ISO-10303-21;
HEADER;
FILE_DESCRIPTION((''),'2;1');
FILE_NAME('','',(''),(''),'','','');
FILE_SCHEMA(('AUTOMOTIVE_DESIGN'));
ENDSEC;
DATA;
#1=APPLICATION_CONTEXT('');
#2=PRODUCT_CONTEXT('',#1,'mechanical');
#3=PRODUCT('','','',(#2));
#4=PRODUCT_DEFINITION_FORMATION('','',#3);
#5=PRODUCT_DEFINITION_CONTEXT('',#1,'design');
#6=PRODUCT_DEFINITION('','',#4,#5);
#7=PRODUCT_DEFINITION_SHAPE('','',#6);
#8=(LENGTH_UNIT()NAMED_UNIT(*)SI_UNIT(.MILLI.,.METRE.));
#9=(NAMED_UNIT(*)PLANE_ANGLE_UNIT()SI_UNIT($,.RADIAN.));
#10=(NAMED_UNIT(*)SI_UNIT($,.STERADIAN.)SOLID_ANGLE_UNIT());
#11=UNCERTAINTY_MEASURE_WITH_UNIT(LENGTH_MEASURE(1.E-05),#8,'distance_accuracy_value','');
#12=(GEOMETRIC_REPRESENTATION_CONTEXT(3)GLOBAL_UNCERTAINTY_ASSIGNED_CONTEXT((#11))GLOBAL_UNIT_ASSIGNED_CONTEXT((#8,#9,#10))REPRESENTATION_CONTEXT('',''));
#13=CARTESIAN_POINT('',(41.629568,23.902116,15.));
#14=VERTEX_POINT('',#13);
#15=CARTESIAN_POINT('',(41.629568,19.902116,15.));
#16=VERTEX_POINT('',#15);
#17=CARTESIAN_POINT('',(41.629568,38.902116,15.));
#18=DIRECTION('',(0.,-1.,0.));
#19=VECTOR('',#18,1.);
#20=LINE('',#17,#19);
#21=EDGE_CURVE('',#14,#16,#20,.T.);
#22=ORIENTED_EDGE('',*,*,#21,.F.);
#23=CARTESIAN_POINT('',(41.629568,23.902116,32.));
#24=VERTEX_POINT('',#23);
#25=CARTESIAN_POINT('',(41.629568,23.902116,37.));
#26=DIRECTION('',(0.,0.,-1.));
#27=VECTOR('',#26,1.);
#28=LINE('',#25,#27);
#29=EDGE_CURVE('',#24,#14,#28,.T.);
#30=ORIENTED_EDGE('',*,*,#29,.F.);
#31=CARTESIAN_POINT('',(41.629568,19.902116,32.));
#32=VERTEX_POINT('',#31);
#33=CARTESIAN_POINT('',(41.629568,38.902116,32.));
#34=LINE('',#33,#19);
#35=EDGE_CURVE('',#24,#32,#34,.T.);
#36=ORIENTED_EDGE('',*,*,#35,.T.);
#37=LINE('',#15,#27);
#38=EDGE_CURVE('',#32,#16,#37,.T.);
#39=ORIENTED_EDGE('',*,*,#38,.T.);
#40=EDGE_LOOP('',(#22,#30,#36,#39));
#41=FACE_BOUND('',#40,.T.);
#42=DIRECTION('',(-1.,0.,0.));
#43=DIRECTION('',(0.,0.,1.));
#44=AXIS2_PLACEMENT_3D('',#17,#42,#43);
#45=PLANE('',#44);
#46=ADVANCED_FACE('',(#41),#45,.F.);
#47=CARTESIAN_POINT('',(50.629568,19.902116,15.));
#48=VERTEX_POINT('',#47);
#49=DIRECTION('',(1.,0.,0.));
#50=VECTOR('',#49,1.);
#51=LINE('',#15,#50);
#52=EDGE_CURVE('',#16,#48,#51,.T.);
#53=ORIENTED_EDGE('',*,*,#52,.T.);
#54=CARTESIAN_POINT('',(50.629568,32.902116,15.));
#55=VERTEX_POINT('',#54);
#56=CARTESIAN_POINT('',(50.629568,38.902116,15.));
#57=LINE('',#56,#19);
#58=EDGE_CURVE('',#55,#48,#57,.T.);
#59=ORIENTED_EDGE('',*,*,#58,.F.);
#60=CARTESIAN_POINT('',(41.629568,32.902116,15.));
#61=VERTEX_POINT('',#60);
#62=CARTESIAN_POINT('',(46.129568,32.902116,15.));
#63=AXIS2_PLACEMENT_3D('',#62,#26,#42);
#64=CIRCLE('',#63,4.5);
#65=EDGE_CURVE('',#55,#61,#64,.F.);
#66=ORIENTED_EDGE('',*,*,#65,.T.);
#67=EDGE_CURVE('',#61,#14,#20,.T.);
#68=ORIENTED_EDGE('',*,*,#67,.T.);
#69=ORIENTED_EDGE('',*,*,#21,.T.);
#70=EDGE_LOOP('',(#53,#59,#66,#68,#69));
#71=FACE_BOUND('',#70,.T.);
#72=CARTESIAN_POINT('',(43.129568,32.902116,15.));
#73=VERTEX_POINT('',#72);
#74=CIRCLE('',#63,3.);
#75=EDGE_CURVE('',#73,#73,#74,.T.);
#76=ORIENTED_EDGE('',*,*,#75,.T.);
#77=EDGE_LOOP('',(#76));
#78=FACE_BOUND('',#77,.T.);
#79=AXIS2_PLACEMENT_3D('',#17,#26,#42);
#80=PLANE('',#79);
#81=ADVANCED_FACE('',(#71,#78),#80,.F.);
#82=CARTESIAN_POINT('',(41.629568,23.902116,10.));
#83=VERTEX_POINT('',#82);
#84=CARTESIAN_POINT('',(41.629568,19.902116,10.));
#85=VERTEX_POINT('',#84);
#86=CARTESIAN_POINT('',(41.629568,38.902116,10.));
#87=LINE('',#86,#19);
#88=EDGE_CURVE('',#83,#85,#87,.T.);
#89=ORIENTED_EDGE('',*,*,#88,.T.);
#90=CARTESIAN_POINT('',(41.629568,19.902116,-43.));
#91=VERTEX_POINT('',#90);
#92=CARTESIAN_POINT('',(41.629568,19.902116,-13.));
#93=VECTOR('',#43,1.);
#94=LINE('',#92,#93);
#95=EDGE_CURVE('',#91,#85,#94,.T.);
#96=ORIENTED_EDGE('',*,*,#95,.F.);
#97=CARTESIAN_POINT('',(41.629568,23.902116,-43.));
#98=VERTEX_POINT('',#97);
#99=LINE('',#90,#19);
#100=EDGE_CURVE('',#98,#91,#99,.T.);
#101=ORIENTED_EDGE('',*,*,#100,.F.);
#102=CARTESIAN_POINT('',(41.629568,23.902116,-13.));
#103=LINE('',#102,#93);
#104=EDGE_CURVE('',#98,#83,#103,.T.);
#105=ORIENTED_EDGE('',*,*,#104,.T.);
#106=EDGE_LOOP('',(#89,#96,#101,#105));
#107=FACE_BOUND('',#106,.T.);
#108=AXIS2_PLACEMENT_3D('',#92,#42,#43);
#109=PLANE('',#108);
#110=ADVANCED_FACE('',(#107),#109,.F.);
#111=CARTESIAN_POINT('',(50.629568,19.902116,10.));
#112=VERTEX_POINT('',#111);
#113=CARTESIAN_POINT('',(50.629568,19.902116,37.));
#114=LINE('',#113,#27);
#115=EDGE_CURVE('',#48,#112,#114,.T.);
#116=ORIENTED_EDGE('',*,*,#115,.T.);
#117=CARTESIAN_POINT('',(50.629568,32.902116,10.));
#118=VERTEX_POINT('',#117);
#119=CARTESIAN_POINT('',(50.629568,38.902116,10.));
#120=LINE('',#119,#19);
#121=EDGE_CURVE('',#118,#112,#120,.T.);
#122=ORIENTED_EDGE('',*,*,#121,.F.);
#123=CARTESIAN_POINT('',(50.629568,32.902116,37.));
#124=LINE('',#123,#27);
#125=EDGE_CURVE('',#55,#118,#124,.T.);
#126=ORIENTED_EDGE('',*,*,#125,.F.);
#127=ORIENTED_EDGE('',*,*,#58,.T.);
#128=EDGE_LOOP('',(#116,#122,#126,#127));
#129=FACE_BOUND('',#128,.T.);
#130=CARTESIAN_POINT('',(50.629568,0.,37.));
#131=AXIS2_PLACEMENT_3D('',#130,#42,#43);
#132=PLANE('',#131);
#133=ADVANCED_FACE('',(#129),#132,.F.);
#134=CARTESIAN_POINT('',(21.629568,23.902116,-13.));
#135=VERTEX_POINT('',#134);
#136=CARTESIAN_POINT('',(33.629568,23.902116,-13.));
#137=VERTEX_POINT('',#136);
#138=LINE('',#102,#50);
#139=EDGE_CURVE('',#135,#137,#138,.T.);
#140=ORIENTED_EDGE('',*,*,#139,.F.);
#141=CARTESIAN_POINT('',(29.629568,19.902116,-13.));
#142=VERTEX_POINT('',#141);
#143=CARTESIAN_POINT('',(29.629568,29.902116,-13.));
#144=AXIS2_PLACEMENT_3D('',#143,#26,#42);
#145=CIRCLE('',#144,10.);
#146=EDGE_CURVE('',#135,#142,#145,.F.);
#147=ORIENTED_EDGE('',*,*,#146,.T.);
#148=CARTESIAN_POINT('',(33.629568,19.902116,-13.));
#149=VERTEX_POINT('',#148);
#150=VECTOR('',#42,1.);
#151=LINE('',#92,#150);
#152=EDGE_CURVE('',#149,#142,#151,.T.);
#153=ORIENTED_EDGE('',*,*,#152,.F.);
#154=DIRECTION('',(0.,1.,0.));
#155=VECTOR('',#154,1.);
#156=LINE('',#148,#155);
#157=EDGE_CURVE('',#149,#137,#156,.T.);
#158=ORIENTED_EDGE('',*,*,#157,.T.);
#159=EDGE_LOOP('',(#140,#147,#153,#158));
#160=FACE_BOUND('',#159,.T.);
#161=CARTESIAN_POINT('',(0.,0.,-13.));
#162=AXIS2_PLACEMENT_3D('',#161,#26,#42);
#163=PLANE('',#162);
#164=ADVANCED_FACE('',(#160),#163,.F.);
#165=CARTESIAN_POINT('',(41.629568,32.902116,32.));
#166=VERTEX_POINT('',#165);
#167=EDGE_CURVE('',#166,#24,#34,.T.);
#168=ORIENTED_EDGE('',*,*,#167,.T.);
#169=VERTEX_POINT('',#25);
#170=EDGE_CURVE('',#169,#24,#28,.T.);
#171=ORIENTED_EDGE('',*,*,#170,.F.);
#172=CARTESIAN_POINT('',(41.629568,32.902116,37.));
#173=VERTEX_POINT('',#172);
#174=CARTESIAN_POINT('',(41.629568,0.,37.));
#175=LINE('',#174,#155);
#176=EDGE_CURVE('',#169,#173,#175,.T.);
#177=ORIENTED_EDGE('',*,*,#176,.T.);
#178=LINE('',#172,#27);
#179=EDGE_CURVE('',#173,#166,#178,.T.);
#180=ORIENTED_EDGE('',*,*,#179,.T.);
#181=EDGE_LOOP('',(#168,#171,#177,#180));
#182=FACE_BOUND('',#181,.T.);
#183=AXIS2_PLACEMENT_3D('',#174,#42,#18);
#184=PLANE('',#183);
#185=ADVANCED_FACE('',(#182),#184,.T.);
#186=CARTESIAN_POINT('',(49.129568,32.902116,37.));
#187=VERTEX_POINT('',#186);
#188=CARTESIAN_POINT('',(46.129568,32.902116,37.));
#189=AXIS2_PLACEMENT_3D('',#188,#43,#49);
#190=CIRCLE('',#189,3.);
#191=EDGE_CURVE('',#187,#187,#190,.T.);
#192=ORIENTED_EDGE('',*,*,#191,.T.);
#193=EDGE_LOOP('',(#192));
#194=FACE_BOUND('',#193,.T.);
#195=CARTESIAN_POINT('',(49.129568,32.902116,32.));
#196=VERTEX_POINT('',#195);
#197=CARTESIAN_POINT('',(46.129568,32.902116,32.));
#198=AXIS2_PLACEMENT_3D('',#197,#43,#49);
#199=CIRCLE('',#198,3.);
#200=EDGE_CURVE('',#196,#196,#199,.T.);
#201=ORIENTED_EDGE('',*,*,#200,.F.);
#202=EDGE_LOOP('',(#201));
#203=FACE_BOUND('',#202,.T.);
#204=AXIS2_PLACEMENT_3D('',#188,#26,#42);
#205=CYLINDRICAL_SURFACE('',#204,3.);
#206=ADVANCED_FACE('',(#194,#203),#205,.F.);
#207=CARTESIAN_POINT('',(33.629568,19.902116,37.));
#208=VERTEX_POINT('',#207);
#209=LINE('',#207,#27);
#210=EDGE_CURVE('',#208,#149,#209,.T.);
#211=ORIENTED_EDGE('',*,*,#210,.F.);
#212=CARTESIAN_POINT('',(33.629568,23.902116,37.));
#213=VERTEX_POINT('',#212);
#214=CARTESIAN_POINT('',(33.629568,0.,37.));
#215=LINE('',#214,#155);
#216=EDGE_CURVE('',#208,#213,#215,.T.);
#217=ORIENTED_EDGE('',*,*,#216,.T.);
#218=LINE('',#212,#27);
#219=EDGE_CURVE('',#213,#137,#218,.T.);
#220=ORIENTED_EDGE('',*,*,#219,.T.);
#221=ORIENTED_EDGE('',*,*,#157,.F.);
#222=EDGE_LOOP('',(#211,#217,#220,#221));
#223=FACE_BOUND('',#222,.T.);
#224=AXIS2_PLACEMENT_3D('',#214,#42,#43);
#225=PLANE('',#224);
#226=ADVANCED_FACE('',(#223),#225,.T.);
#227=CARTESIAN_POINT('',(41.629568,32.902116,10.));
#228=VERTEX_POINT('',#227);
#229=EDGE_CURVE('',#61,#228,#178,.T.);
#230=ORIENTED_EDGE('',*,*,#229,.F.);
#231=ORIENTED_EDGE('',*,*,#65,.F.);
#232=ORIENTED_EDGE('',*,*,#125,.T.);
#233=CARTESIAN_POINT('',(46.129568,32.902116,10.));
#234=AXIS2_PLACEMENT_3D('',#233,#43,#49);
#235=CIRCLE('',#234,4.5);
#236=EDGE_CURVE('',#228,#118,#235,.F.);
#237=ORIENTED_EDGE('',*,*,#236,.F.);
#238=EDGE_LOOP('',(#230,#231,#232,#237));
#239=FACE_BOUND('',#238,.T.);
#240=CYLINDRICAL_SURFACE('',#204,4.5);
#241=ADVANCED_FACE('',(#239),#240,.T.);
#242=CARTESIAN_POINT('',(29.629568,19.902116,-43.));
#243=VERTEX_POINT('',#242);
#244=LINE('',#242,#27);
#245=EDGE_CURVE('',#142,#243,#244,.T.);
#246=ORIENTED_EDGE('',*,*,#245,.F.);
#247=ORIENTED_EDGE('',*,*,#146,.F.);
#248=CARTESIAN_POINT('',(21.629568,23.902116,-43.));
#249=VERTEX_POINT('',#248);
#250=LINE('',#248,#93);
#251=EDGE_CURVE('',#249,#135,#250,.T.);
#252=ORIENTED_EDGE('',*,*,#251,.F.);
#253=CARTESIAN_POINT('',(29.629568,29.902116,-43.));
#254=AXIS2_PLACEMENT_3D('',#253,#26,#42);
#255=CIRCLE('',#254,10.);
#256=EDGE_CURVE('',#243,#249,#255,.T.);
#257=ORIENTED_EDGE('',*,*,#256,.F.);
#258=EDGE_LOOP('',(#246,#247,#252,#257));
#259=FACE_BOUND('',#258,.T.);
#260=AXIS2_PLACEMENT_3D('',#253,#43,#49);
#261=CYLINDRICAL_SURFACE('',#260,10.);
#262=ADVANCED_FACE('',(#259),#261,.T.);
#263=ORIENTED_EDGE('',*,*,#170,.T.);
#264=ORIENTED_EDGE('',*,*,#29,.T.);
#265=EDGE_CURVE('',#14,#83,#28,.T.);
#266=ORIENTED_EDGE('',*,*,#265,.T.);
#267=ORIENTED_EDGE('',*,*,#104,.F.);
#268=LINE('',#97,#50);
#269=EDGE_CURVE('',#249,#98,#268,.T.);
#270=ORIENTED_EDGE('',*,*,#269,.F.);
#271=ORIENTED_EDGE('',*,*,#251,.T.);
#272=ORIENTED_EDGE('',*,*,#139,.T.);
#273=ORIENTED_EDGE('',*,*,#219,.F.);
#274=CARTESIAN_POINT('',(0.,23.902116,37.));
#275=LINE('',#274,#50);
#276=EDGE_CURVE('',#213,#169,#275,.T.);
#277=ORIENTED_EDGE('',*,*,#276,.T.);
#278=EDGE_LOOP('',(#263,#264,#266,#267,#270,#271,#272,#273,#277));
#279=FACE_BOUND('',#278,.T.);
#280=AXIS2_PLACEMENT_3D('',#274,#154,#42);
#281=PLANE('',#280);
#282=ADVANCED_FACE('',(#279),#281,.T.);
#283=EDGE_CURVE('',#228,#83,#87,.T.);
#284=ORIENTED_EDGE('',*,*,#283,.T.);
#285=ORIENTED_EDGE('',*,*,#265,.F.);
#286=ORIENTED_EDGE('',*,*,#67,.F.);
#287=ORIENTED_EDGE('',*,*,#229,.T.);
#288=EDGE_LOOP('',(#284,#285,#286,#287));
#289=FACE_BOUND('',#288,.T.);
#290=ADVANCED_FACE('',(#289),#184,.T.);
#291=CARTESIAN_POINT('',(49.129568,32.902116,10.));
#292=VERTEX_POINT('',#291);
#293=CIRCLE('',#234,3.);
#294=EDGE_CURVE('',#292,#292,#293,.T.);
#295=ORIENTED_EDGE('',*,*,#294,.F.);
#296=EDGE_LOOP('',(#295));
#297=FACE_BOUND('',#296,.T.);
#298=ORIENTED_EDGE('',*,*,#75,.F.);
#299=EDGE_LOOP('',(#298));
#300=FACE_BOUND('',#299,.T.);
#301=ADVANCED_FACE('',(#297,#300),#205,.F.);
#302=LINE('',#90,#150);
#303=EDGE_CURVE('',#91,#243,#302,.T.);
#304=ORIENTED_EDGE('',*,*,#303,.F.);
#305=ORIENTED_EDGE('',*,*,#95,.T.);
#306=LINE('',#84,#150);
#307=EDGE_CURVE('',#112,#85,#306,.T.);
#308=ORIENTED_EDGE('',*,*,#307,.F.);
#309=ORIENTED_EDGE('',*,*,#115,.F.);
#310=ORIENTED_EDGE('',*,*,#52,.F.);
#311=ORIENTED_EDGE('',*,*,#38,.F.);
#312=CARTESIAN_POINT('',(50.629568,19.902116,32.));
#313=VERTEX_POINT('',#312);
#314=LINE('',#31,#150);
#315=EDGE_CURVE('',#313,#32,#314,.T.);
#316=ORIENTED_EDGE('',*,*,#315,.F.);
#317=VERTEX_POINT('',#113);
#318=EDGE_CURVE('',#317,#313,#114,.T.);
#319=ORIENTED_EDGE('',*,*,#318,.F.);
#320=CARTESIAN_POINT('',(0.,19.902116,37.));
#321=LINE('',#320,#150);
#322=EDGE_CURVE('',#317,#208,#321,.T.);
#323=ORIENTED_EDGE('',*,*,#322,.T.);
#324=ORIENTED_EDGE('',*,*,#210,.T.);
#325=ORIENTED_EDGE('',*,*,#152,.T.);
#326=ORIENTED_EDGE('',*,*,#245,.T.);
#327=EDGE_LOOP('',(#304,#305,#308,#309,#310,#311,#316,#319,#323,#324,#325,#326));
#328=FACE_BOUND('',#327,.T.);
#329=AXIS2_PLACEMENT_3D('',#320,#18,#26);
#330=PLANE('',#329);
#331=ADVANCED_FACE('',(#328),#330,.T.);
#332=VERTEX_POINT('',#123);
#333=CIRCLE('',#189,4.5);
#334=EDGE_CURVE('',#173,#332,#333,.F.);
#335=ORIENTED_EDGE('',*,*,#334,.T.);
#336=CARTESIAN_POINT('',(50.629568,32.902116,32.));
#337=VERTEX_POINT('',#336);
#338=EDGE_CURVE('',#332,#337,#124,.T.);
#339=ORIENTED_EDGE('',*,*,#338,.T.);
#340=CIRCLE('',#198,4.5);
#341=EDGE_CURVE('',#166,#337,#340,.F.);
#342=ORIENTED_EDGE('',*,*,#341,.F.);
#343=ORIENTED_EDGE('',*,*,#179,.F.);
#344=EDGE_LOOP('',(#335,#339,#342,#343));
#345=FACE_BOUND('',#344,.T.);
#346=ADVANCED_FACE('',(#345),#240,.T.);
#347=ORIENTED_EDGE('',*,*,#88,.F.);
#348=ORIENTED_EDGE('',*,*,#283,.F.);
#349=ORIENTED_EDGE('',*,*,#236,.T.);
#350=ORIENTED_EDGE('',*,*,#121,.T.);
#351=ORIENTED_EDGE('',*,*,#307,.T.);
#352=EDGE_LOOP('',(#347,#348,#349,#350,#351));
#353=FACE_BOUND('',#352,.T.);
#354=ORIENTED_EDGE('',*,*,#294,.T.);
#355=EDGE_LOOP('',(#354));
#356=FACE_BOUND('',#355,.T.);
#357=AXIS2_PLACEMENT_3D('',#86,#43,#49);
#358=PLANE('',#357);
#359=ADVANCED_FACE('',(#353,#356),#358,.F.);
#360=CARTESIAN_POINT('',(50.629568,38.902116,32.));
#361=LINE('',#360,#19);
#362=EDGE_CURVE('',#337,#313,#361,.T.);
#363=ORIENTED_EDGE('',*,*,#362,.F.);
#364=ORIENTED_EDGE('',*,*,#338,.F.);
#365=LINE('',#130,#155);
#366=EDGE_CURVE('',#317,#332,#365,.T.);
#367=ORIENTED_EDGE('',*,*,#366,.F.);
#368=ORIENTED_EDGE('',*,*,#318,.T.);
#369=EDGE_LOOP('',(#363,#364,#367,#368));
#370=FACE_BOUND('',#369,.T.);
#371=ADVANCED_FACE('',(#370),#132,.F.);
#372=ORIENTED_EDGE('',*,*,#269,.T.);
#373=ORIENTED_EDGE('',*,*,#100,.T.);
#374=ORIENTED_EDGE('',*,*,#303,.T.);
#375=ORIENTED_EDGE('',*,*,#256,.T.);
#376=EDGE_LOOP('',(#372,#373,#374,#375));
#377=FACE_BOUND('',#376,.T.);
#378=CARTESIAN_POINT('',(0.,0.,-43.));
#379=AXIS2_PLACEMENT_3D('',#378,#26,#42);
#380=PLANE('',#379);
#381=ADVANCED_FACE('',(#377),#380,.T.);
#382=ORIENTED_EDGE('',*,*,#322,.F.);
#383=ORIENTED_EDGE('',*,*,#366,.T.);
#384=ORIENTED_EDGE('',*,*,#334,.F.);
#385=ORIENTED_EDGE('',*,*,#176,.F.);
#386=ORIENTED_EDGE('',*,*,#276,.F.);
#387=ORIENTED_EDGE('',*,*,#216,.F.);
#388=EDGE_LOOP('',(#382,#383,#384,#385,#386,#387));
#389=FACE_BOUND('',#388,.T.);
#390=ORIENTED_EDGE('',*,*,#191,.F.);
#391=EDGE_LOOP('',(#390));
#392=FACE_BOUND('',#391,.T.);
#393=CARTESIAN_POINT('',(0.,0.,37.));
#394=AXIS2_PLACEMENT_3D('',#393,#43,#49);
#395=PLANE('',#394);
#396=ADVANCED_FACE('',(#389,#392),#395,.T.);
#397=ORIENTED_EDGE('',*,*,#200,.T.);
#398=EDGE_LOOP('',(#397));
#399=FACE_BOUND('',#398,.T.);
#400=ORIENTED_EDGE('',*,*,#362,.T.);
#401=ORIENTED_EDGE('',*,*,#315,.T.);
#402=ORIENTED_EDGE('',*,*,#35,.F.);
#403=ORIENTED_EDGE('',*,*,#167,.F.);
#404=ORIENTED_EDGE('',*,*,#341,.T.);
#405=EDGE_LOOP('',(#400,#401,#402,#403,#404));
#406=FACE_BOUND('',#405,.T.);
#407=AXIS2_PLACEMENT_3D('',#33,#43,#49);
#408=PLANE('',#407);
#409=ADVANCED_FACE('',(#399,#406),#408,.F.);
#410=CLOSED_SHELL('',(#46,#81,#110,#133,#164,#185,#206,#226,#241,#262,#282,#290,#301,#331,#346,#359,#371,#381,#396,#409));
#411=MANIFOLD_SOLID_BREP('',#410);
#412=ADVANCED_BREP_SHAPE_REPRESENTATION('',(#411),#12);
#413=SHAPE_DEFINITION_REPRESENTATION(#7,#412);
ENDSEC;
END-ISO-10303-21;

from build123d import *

# Parameters (mm, degrees)
SKETCH1_W           = 8
SKETCH1_H           = 4
SKETCH1_R           = 3
BOSS_EXTRUDE1_DEPTH = 37
SKETCH3_W           = 8
SKETCH3_H           = 4
BOSS_EXTRUDE2_DEPTH = 13
SKETCH4_W           = 20
SKETCH4_H           = 4
BOSS_EXTRUDE3_DEPTH = 30
FILLET1_R           = 10
SKETCH5_W           = 9
SKETCH5_H           = 10
SKETCH5_H_2         = 17
CUT_EXTRUDE1_DEPTH  = 19


with BuildPart() as part:
    # Sketch1 → Boss-Extrude1 (new body)
    # profile 1 of 2: a face of its own
    with BuildSketch(Plane.XY):
        with Locations((37.629567615, 21.902115813)):
            Rectangle(SKETCH1_W, SKETCH1_H)
    # profile 2 of 2: a face of its own
    with BuildSketch(Plane.XY):
        with BuildLine():
            ThreePointArc((41.629567615, 32.902115813), (46.129567615, 37.402115813), (50.629567615, 32.902115813))
            Line((50.629567615, 32.902115813), (50.629567615, 19.902115813))
            Line((50.629567615, 19.902115813), (41.629567615, 19.902115813))
            Line((41.629567615, 19.902115813), (41.629567615, 23.902115813))
            Line((41.629567615, 23.902115813), (41.629567615, 32.902115813))
        make_face()
        with Locations((46.129567615, 32.902115813)):
            Circle(SKETCH1_R, mode=Mode.SUBTRACT)
    extrude(amount=BOSS_EXTRUDE1_DEPTH)

    # Sketch3 → Boss-Extrude2 (add)
    with BuildSketch(Plane(origin=(0, 0, 0), x_dir=(-1, 0, 0), z_dir=(0, 0, -1))):
        with Locations((-37.629567615, 21.902115813)):
            Rectangle(SKETCH3_W, SKETCH3_H)
    extrude(amount=BOSS_EXTRUDE2_DEPTH)

    # Sketch4 → Boss-Extrude3 (add)
    with BuildSketch(Plane(origin=(0, 0, -13), x_dir=(-1, 0, 0), z_dir=(0, 0, -1))):
        with Locations((-31.629567615, 21.902115813)):
            Rectangle(SKETCH4_W, SKETCH4_H)
    extrude(amount=BOSS_EXTRUDE3_DEPTH)

    # Fillet1
    # the kernel refuses this fillet: 10 mm, written as the material it takes off along each edge
    with BuildSketch(Plane(origin=(21.629567615, 19.902115813, 7), x_dir=(1, 0, 0), z_dir=(0, 0, -1))) as fillet1_piece_1:
        with BuildLine():
            CenterArc((8, -10), FILLET1_R, 90, 53.130102354)
            Line((0, -4), (-0.16, -3.88))
            ThreePointArc((-0.16, -3.88), (-0.2, -2), (-0.2, 0))
            Line((-0.2, 0), (0, 0.2))
            Line((0, 0.2), (8, 0.2))
            Line((8, 0.2), (8, 0))
        make_face()
    extrude(amount=70, mode=Mode.SUBTRACT)

    # Sketch5 → Cut-Extrude1 (cut)
    with BuildSketch(Plane(origin=(0, 19.902115813, 0), x_dir=(-1, 0, 0), z_dir=(0, -1, 0))):
        with Locations((-46.129567615, -5)):
            Rectangle(SKETCH5_W, SKETCH5_H)
        with Locations((-46.129567615, -23.5)):
            Rectangle(SKETCH5_W, SKETCH5_H_2)
    extrude(amount=-CUT_EXTRUDE1_DEPTH, mode=Mode.SUBTRACT)


solid = part.part
